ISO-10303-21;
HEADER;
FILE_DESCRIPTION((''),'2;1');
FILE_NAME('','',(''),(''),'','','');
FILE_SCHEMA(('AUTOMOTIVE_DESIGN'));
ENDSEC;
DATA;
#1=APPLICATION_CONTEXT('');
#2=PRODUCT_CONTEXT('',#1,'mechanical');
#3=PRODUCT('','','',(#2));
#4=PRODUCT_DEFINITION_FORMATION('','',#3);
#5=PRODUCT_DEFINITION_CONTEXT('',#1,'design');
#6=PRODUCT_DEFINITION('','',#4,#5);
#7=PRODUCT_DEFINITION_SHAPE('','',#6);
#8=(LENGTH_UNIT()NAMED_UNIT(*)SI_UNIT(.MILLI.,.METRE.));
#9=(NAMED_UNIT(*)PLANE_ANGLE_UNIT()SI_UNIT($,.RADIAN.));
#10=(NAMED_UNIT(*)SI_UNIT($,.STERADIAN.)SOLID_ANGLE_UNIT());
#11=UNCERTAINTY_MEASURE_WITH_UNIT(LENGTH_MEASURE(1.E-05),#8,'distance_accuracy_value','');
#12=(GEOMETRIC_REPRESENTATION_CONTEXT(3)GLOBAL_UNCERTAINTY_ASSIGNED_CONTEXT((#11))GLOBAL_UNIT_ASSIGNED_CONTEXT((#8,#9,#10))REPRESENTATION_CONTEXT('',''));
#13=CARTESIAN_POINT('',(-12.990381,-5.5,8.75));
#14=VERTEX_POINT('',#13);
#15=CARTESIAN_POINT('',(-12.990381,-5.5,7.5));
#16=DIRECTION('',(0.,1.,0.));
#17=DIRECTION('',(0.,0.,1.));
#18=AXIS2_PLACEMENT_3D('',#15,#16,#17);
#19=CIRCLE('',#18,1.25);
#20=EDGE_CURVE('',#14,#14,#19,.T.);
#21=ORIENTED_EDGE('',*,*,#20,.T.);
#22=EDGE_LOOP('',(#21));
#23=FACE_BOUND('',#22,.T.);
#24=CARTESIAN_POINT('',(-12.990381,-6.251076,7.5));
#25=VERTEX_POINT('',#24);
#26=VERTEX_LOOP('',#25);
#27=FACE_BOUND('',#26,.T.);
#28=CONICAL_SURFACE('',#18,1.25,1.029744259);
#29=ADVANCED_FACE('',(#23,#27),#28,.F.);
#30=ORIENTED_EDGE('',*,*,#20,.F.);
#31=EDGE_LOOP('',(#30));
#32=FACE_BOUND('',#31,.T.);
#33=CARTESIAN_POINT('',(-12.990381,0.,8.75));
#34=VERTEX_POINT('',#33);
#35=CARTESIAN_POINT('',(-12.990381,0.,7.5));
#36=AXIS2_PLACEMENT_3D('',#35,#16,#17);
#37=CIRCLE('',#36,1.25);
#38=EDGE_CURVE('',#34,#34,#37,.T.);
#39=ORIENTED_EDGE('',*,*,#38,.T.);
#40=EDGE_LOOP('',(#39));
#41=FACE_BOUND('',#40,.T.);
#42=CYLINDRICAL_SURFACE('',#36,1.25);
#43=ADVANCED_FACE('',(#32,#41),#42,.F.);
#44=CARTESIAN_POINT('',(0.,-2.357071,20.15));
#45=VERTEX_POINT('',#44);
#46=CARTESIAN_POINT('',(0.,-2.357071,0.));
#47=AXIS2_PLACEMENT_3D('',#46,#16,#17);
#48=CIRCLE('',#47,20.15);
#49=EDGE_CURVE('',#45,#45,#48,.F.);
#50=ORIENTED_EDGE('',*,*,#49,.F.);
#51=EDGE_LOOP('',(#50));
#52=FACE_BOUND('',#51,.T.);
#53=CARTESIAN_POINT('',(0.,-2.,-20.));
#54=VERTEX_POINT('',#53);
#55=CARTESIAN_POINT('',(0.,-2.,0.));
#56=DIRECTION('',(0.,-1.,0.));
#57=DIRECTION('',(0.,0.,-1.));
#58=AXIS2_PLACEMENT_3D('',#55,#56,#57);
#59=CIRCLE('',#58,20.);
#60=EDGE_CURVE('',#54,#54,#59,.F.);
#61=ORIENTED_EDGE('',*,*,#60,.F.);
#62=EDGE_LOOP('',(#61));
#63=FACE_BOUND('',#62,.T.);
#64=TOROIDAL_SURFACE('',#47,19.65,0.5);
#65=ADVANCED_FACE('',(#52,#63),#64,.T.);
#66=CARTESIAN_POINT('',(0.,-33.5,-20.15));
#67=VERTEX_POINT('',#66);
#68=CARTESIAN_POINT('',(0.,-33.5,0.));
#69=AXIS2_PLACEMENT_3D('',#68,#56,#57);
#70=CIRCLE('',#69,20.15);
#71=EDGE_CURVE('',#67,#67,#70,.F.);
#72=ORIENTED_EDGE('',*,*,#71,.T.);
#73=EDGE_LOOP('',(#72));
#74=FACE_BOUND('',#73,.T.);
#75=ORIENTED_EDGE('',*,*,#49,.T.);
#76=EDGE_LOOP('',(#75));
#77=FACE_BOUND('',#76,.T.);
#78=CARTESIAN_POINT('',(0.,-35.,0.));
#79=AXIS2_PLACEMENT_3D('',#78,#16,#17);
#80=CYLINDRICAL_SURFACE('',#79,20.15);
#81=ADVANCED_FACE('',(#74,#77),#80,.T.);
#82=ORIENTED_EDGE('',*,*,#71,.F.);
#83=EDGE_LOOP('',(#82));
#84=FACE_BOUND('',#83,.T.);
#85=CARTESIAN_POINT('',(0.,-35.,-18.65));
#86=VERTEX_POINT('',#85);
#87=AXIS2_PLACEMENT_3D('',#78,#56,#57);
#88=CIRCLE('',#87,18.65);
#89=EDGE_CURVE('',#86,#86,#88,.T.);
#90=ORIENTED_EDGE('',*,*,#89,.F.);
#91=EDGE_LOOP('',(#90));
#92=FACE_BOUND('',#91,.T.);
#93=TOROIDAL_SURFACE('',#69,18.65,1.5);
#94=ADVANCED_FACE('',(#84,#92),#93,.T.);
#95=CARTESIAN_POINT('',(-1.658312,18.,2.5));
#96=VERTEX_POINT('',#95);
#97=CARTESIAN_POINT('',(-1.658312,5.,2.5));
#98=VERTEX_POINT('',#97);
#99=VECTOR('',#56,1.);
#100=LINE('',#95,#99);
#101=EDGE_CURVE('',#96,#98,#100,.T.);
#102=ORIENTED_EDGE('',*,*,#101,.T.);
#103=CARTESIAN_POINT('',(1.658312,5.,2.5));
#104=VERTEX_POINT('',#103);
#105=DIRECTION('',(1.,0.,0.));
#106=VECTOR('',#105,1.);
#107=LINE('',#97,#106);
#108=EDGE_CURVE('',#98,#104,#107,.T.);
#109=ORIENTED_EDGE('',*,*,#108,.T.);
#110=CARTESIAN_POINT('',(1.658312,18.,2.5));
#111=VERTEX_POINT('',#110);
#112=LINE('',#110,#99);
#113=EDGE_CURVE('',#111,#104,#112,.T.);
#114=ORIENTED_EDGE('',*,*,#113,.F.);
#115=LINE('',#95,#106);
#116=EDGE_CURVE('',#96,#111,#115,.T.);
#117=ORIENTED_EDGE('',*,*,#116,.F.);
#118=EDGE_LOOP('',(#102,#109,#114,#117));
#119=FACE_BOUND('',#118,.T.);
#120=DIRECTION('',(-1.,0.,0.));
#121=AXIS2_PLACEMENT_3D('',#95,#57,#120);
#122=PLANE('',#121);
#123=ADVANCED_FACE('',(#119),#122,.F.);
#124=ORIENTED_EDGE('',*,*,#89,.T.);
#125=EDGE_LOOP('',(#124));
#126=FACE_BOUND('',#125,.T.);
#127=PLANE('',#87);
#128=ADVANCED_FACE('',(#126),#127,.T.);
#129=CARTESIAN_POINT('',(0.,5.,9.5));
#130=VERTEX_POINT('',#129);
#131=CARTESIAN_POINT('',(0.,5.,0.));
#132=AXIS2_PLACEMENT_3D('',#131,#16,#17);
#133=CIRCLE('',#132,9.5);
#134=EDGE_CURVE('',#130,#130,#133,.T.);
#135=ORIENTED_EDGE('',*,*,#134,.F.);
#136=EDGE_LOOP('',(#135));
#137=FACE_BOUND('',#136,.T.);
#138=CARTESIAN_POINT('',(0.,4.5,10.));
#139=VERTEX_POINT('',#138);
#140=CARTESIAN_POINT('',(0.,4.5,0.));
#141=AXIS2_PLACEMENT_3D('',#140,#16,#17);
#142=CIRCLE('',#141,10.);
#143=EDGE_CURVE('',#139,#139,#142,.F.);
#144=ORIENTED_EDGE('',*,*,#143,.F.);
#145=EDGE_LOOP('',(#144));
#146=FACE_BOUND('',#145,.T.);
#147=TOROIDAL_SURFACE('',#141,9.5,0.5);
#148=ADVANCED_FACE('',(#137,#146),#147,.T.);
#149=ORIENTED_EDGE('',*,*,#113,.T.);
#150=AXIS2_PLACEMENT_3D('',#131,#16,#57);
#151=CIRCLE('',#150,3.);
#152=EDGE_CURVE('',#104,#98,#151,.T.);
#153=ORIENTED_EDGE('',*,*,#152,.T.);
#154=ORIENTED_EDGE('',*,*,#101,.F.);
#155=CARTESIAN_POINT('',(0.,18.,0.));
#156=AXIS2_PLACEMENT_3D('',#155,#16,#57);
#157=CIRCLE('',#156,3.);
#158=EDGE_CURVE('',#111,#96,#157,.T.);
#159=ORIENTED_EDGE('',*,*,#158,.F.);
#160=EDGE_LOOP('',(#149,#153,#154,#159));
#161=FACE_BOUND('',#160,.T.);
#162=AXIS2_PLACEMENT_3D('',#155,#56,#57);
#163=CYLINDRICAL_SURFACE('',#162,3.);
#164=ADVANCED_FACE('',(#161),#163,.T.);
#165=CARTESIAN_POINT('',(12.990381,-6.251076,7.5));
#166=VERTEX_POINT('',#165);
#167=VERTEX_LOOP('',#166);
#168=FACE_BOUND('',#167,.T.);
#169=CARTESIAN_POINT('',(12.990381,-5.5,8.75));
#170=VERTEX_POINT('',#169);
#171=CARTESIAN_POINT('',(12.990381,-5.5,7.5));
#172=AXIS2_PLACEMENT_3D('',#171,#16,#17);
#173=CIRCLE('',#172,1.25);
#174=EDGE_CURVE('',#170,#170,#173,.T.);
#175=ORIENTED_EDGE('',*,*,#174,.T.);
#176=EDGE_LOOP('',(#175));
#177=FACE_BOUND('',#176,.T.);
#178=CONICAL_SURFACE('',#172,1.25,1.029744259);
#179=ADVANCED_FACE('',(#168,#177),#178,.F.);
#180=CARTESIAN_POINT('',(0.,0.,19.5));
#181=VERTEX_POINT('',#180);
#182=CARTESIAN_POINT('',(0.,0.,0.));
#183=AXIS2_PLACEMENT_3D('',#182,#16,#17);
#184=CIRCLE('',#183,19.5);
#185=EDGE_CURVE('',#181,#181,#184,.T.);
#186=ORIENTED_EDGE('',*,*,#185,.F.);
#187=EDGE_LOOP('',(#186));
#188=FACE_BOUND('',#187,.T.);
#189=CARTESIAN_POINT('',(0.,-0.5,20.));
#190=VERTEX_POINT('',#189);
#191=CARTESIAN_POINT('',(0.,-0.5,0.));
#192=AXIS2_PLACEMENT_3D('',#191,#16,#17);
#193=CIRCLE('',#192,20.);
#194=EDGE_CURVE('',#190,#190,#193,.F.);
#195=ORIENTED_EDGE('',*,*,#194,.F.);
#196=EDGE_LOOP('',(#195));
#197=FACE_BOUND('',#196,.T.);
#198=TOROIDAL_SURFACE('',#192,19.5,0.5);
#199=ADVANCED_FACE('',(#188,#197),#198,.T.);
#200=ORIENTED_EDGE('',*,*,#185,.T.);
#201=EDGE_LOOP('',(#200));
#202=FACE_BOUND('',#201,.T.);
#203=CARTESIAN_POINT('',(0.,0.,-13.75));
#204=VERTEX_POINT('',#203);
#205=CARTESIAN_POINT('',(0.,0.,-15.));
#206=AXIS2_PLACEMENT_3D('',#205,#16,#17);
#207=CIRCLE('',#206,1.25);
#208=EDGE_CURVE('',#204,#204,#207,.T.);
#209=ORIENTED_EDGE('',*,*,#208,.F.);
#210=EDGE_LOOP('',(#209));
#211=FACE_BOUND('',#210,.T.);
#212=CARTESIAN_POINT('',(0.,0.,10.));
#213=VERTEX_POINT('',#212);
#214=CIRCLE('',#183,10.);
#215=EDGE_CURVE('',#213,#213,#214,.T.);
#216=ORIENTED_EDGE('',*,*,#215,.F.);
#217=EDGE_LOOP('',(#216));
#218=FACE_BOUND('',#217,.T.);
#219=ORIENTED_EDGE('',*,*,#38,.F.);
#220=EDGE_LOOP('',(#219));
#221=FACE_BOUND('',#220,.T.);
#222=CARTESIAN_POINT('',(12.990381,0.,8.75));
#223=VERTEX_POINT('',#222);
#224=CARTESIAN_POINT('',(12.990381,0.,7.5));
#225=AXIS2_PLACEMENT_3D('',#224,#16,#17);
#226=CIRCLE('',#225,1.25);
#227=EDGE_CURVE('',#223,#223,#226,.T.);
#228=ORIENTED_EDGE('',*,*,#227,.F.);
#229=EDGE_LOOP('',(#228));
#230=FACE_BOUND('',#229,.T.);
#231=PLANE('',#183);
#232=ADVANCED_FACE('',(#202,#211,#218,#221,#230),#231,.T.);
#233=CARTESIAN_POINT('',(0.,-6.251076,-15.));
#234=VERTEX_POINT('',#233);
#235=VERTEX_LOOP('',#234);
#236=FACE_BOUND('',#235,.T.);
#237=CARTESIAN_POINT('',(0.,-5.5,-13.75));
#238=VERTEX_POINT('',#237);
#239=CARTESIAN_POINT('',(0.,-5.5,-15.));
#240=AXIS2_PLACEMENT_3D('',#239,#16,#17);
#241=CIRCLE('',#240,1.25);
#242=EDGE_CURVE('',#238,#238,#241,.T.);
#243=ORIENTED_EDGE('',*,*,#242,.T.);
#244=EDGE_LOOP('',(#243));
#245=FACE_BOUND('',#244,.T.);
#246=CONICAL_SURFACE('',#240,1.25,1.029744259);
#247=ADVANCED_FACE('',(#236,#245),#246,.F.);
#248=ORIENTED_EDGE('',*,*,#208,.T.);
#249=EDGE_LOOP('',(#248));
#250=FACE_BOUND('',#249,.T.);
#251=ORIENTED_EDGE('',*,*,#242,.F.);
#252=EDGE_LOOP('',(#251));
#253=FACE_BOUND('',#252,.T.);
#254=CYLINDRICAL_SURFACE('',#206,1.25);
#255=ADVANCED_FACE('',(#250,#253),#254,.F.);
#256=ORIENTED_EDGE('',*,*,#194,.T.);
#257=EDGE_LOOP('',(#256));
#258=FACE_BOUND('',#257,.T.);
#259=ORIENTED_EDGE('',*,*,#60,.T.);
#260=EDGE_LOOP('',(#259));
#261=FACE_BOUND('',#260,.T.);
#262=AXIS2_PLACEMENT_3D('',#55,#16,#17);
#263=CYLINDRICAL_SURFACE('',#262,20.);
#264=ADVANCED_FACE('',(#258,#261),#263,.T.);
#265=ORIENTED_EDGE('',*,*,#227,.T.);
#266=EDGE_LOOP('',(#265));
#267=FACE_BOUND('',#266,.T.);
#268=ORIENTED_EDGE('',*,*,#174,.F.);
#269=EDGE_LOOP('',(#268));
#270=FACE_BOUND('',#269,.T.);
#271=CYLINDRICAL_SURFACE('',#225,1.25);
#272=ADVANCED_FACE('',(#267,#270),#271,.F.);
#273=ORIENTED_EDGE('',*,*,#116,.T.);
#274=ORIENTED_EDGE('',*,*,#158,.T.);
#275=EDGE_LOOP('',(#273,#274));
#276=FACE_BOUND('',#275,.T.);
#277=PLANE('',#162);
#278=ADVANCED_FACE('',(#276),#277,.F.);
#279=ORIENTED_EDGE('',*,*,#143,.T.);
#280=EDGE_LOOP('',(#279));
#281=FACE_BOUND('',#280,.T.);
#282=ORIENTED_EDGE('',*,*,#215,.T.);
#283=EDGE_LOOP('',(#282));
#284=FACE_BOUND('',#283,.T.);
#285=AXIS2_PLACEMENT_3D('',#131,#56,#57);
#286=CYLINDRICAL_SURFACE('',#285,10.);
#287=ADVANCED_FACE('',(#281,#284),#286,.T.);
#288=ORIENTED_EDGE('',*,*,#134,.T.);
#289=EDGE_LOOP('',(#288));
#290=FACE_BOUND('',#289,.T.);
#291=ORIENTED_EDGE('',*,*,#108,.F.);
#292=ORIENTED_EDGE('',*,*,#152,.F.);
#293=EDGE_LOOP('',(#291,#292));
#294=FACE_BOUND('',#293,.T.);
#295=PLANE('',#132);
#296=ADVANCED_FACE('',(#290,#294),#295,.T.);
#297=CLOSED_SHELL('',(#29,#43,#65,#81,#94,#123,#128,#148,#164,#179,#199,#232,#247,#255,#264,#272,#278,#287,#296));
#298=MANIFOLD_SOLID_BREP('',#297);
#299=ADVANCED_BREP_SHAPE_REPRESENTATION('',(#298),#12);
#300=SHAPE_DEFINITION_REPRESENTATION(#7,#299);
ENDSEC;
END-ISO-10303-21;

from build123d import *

# Parameters (mm, degrees)
SKETCH1_R                 = 20
BOSS_EXTRUDE1_DEPTH       = 2
SKETCH4_R                 = 20.15
BOSS_EXTRUDE3_DEPTH       = 33
SKETCH5_R                 = 10
BOSS_EXTRUDE4_DEPTH       = 5
BOSS_EXTRUDE5_DEPTH       = 13
FILLET2_R                 = 0.5
FILLET3_R                 = 1.5
M3X0_5_TAPPED_HOLE1_D     = 2.5
M3X0_5_TAPPED_HOLE1_DEPTH = 5.5
M3X0_5_TAPPED_HOLE1_TIP   = 0.751075774


with BuildPart() as part:
    # Sketch1 → Boss-Extrude1 (new body)
    with BuildSketch(Plane(origin=(0, 0, 0), x_dir=(1, 0, 0), z_dir=(0, 1, 0))):
        with Locations(Location((0, 0, 0), (0, 0, 270))):
            Circle(SKETCH1_R)
    extrude(amount=-BOSS_EXTRUDE1_DEPTH)

    # Sketch4 → Boss-Extrude3 (add)
    with BuildSketch(Plane.XZ.offset(2)):
        with Locations(Location((0, 0, 0), (0, 0, 270))):
            Circle(SKETCH4_R)
    extrude(amount=BOSS_EXTRUDE3_DEPTH)

    # Sketch5 → Boss-Extrude4 (add)
    with BuildSketch(Plane(origin=(0, 0, 0), x_dir=(1, 0, 0), z_dir=(0, 1, 0))):
        with Locations(Location((0, 0, 0), (0, 0, 270))):
            Circle(SKETCH5_R)
    extrude(amount=BOSS_EXTRUDE4_DEPTH)

    # Sketch7 → Boss-Extrude5 (add)
    with BuildSketch(Plane(origin=(0, 5, 0), x_dir=(1, 0, 0), z_dir=(0, 1, 0))):
        with BuildLine():
            Line((-1.658312395, -2.5), (1.658312395, -2.5))
            ThreePointArc((1.658312395, -2.5), (0, 3), (-1.658312395, -2.5))
        make_face()
    extrude(amount=BOSS_EXTRUDE5_DEPTH)

    # Fillet2
    # the kernel refuses this fillet: 0.5 mm, written as the material it takes off along each edge
    with BuildSketch(Plane(origin=(0, 5, 0), x_dir=(0, 0, 1), z_dir=(-1, 0, 0))) as fillet2_piece_1:
        with BuildLine():
            CenterArc((10 - FILLET2_R, -FILLET2_R), FILLET2_R, 0, 90)
            Line((10 - FILLET2_R, 0), (10 - FILLET2_R, FILLET2_R * 0.02))
            Line((10 - FILLET2_R, FILLET2_R * 0.02), (10 + FILLET2_R * 0.02, FILLET2_R * 0.02))
            Line((10 + FILLET2_R * 0.02, FILLET2_R * 0.02), (10 + FILLET2_R * 0.02, -FILLET2_R))
            Line((10 + FILLET2_R * 0.02, -FILLET2_R), (10, -FILLET2_R))
        make_face()
    revolve(axis=Axis((0, 5, 0), (0, 1, 0)), mode=Mode.SUBTRACT)
    with BuildSketch(Plane(origin=(0, 0, 0), x_dir=(0, 0, 1), z_dir=(-1, 0, 0))) as fillet2_piece_2:
        with BuildLine():
            CenterArc((20 - FILLET2_R, -FILLET2_R), FILLET2_R, 0, 90)
            Line((20 - FILLET2_R, 0), (20 - FILLET2_R, FILLET2_R * 0.02))
            Line((20 - FILLET2_R, FILLET2_R * 0.02), (20 + FILLET2_R * 0.02, FILLET2_R * 0.02))
            Line((20 + FILLET2_R * 0.02, FILLET2_R * 0.02), (20 + FILLET2_R * 0.02, -FILLET2_R))
            Line((20 + FILLET2_R * 0.02, -FILLET2_R), (20, -FILLET2_R))
        make_face()
    revolve(axis=Axis((0, 0, 0), (0, 1, 0)), mode=Mode.SUBTRACT)
    with BuildSketch(Plane(origin=(0, -2, 0), x_dir=(0, 0, -1), z_dir=(-1, 0, 0))) as fillet2_piece_3:
        with BuildLine():
            CenterArc((19.65, 0.357071421), FILLET2_R, 314.427004001, 45.572995999)
            Line((20, 0), (20.007, -0.007141428))
            ThreePointArc((20.007, -0.007141428), (20.075, -0.01), (20.15, -0.01))
            Line((20.15, -0.01), (20.16, 0))
            Line((20.16, 0), (20.16, 0.357071421))
            Line((20.16, 0.357071421), (20.15, 0.357071421))
        make_face()
    revolve(axis=Axis((0, -2, 0), (0, -1, 0)), mode=Mode.SUBTRACT)

    # Fillet3
    fillet3_edges = [part.edges().sort_by_distance(p)[0] for p in [
        (0, -35, 20.15),
    ]]
    fillet(fillet3_edges, radius=FILLET3_R)

    # M3x0.5 Tapped Hole1
    with Locations(Plane(origin=(0, 0, 0), x_dir=(1, 0, 0), z_dir=(0, 1, 0))):
        with Locations((0, 15), (12.990381057, -7.5), (-12.990381057, -7.5)):
            Hole(M3X0_5_TAPPED_HOLE1_D / 2, depth=M3X0_5_TAPPED_HOLE1_DEPTH)
            with Locations((0, 0, -(M3X0_5_TAPPED_HOLE1_DEPTH + M3X0_5_TAPPED_HOLE1_TIP / 2))):  # 118° drill point
                Cone(0, M3X0_5_TAPPED_HOLE1_D / 2, M3X0_5_TAPPED_HOLE1_TIP, mode=Mode.SUBTRACT)


solid = part.part
